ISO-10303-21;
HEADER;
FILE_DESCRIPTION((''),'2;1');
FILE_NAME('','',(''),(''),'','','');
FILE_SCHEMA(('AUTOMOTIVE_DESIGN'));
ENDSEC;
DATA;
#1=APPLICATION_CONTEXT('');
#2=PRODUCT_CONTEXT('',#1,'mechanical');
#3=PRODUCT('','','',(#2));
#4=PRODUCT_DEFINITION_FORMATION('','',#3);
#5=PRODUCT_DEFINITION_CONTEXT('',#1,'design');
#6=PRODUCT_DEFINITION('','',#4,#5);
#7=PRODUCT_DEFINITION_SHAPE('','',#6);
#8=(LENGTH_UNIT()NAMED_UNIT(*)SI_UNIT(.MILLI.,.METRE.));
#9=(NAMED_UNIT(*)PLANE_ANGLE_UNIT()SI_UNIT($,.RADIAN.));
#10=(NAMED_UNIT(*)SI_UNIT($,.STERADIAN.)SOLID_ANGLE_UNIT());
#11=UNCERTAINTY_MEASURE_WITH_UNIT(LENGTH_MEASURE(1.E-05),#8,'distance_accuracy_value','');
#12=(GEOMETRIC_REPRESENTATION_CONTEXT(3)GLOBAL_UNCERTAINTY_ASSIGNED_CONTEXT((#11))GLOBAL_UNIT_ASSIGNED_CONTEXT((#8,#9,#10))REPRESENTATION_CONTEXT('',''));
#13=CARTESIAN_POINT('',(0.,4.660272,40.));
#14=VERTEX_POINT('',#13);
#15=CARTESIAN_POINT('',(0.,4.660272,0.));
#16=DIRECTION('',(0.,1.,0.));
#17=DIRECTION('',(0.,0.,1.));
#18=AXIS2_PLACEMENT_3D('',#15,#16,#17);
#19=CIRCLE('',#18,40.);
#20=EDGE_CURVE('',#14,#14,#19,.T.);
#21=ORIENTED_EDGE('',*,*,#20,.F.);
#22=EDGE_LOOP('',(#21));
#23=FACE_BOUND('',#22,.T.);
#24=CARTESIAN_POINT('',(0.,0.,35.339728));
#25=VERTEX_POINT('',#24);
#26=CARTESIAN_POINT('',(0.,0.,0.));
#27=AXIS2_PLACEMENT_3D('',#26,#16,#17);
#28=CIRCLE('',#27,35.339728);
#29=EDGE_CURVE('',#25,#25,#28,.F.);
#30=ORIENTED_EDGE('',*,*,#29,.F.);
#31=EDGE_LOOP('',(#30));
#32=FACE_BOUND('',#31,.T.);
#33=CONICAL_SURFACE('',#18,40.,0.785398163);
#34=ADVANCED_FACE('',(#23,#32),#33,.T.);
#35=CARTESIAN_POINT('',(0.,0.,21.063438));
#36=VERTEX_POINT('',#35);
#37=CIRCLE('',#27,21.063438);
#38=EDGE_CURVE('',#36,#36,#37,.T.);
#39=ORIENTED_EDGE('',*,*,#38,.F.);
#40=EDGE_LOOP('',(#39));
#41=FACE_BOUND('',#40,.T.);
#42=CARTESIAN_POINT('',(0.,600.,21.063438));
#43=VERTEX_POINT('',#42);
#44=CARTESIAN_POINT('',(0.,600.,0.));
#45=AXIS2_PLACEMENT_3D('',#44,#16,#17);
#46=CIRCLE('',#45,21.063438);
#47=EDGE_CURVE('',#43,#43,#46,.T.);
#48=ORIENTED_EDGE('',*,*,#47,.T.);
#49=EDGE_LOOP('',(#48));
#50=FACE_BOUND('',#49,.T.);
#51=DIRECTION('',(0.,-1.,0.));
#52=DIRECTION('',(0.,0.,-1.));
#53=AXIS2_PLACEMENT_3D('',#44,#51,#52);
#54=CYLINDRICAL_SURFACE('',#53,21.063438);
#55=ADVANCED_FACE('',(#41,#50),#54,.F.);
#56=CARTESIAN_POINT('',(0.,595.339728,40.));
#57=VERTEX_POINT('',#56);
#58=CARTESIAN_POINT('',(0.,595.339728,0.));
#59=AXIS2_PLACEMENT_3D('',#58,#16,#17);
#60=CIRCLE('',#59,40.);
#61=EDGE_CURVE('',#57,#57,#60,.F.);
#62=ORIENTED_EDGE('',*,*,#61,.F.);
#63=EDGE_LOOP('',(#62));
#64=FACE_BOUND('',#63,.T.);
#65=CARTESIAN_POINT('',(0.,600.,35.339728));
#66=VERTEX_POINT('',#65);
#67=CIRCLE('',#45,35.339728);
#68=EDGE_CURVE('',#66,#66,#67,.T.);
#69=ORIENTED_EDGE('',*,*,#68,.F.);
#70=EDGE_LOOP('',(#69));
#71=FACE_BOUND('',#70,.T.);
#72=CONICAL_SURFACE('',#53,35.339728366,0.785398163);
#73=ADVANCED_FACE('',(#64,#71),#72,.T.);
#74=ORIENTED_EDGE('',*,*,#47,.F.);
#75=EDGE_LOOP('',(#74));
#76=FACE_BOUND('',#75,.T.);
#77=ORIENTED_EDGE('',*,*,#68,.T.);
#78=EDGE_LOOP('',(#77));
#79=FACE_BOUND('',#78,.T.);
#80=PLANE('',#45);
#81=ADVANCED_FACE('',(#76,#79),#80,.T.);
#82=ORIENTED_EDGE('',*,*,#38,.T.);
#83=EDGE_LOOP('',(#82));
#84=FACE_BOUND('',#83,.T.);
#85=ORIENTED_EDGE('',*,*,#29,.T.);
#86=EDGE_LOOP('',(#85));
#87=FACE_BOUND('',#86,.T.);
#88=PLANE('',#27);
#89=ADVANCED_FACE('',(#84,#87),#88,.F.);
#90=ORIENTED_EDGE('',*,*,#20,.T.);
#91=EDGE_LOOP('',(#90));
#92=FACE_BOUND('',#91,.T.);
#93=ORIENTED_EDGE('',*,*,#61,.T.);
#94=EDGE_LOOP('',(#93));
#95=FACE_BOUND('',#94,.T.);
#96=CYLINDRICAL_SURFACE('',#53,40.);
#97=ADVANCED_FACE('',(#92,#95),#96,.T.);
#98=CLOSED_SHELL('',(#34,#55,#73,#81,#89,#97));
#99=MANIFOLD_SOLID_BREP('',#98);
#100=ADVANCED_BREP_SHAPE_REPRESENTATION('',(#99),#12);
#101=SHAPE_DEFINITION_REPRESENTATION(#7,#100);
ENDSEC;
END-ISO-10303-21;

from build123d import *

# Parameters (mm, degrees)
SKETCH1_R           = 40
BOSS_EXTRUDE1_DEPTH = 600
SKETCH2_R           = 21.06343848
CUT_EXTRUDE1_DEPTH  = 603.660766933
CHAMFER1_SIZE       = 4.660271634


with BuildPart() as part:
    # Sketch1 → Boss-Extrude1 (new body)
    with BuildSketch(Plane(origin=(0, 0, 0), x_dir=(1, 0, 0), z_dir=(0, 1, 0))):
        Circle(SKETCH1_R)
    extrude(amount=BOSS_EXTRUDE1_DEPTH)

    # Sketch2 → Cut-Extrude1 (cut, through all)
    with BuildSketch(Plane(origin=(0, 0, 0), x_dir=(1, 0, 0), z_dir=(0, 1, 0))):
        Circle(SKETCH2_R)
    extrude(amount=CUT_EXTRUDE1_DEPTH, mode=Mode.SUBTRACT)

    # Chamfer1
    chamfer1_edges = [part.edges().sort_by_distance(p)[0] for p in [
        (-40, 600, 0),
        (-40, 0, 0),
    ]]
    chamfer(chamfer1_edges, length=CHAMFER1_SIZE)


solid = part.part
